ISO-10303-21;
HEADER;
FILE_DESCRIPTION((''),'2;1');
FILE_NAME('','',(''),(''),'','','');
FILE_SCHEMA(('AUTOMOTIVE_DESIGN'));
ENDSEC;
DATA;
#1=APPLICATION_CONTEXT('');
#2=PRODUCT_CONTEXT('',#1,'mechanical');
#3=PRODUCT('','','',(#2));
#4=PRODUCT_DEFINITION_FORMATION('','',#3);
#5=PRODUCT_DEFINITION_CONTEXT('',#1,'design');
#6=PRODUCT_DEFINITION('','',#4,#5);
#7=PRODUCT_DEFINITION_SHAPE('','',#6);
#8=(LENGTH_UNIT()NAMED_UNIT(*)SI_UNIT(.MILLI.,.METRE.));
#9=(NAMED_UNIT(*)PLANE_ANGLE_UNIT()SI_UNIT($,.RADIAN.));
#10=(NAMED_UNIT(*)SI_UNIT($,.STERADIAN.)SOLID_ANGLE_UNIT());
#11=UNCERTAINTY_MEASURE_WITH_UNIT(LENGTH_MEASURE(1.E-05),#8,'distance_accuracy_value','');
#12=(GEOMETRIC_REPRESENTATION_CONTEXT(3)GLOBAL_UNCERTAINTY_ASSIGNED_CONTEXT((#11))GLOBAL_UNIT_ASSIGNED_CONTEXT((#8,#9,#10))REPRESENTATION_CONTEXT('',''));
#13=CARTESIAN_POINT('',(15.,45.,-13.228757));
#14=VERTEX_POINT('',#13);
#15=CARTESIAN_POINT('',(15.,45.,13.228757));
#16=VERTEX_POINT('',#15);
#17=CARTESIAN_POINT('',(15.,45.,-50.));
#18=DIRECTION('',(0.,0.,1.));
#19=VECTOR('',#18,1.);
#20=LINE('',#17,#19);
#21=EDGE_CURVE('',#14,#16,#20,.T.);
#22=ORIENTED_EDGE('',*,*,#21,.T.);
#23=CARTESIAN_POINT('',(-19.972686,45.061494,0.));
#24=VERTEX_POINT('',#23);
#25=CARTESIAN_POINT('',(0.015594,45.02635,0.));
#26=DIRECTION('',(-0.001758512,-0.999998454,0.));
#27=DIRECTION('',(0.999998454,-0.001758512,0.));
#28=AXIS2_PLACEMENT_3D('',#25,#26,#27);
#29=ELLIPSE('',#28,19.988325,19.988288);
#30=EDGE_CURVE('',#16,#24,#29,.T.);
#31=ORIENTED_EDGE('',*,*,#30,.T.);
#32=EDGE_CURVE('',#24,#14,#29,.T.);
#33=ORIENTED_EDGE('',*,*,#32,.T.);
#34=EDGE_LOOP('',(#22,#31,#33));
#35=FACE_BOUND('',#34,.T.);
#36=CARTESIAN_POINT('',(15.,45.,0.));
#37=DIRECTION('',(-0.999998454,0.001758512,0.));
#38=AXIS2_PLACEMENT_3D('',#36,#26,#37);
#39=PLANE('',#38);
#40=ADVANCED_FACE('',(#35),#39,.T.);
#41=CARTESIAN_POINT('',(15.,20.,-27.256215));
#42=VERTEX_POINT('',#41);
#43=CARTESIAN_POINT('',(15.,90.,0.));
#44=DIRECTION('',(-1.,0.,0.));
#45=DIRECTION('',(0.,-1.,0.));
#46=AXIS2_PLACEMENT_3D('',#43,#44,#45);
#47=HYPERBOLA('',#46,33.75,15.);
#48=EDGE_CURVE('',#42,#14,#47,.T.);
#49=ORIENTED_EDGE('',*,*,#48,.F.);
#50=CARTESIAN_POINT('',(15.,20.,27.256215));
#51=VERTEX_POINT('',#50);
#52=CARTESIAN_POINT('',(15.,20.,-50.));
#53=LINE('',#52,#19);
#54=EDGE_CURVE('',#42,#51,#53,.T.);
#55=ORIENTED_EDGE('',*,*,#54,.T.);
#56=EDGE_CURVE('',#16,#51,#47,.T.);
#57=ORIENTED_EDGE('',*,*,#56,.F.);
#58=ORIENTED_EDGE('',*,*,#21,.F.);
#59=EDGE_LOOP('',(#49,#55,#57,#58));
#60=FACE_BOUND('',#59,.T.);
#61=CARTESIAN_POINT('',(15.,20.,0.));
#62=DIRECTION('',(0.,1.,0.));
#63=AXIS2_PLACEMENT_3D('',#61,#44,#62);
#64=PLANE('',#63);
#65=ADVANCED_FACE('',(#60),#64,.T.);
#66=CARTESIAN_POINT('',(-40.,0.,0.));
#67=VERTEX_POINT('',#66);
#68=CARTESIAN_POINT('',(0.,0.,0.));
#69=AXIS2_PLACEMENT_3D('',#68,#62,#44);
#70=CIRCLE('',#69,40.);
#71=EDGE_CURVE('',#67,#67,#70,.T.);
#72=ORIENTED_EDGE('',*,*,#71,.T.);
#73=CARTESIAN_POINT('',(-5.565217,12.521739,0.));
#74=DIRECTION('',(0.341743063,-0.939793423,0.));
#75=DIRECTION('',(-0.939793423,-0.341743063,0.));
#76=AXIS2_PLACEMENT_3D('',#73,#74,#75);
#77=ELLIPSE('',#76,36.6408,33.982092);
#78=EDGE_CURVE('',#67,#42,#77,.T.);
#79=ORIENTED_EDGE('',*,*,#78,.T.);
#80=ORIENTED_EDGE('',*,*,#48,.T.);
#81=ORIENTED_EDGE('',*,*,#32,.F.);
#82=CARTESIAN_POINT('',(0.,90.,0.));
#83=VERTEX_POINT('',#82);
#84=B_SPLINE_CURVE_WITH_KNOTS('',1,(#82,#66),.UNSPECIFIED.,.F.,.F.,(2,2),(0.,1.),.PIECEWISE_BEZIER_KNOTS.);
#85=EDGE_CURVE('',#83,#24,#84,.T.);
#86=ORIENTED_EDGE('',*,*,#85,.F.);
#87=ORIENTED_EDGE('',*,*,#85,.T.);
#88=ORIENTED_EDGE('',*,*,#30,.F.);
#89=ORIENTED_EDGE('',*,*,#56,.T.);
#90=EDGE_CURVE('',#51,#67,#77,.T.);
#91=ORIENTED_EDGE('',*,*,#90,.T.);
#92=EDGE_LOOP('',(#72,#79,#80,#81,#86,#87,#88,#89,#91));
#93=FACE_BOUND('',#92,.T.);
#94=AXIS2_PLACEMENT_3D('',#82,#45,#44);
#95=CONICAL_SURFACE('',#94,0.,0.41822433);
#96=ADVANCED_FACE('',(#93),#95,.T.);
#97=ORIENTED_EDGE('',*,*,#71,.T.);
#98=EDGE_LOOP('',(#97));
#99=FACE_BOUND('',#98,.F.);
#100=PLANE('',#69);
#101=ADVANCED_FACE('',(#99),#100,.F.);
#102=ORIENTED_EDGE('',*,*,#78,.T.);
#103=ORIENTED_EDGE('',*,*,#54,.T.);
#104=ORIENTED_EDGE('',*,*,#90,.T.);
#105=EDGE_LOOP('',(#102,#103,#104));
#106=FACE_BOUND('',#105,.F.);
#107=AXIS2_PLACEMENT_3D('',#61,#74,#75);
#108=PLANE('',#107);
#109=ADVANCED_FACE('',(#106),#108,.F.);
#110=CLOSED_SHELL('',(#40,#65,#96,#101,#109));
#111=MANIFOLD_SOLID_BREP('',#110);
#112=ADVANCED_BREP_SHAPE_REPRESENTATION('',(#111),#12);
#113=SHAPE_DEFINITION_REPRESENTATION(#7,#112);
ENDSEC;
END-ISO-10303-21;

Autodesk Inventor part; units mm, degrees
ref_plane "YZ Plane" through (0, 0, 0) normal (1, 0, 0) x (0, 1, 0)
ref_plane "XY Plane" through (0, 0, 0) normal (0, 0, 1) x (1, 0, 0)
sketch "Эскиз1" plane through (0, 0, 0) normal (0, 1, 0) x (-1, 0, 0)
  circle A0 centre (0, 0) radius 40
  dimension "d0" = 80
ref_plane "РабПлоскость1" through (0, 90, 0) normal (0, 1, 0) x (-1, 0, 0)
sketch "Эскиз3" plane through (0, 90, 0) normal (0, 1, 0) x (-1, 0, 0)
  point P0 (0, 0)
  point P1 (0, 0)
loft "Лофт1" add profiles "Эскиз1" section 1 point at (0, 90, 0)
sketch "Эскиз4" plane through (0, 0, 0) normal (0, 0, 1) x (1, 0, 0)
  line L0 (0, 0) -> (15, 0)
  line L1 (40, 0) -> (-40, 0) projected
  line L2 (15, 20) -> (-40, 0)
  line L3 (15, 20) -> (15, 45)
  line L4 (15, 45) -> (-19.9727, 45.0615)
  line L5 (-19.9727, 45.0615) -> (-40, 0)
  line L6 (-40, 0) -> (0, 90) projected
  dimension "d6" = 15
  dimension "d8" = 25
extrude "Выдавливание1" cut sketch "Эскиз4" along normal mid plane 100
properties part number "Деталь2Инди"
